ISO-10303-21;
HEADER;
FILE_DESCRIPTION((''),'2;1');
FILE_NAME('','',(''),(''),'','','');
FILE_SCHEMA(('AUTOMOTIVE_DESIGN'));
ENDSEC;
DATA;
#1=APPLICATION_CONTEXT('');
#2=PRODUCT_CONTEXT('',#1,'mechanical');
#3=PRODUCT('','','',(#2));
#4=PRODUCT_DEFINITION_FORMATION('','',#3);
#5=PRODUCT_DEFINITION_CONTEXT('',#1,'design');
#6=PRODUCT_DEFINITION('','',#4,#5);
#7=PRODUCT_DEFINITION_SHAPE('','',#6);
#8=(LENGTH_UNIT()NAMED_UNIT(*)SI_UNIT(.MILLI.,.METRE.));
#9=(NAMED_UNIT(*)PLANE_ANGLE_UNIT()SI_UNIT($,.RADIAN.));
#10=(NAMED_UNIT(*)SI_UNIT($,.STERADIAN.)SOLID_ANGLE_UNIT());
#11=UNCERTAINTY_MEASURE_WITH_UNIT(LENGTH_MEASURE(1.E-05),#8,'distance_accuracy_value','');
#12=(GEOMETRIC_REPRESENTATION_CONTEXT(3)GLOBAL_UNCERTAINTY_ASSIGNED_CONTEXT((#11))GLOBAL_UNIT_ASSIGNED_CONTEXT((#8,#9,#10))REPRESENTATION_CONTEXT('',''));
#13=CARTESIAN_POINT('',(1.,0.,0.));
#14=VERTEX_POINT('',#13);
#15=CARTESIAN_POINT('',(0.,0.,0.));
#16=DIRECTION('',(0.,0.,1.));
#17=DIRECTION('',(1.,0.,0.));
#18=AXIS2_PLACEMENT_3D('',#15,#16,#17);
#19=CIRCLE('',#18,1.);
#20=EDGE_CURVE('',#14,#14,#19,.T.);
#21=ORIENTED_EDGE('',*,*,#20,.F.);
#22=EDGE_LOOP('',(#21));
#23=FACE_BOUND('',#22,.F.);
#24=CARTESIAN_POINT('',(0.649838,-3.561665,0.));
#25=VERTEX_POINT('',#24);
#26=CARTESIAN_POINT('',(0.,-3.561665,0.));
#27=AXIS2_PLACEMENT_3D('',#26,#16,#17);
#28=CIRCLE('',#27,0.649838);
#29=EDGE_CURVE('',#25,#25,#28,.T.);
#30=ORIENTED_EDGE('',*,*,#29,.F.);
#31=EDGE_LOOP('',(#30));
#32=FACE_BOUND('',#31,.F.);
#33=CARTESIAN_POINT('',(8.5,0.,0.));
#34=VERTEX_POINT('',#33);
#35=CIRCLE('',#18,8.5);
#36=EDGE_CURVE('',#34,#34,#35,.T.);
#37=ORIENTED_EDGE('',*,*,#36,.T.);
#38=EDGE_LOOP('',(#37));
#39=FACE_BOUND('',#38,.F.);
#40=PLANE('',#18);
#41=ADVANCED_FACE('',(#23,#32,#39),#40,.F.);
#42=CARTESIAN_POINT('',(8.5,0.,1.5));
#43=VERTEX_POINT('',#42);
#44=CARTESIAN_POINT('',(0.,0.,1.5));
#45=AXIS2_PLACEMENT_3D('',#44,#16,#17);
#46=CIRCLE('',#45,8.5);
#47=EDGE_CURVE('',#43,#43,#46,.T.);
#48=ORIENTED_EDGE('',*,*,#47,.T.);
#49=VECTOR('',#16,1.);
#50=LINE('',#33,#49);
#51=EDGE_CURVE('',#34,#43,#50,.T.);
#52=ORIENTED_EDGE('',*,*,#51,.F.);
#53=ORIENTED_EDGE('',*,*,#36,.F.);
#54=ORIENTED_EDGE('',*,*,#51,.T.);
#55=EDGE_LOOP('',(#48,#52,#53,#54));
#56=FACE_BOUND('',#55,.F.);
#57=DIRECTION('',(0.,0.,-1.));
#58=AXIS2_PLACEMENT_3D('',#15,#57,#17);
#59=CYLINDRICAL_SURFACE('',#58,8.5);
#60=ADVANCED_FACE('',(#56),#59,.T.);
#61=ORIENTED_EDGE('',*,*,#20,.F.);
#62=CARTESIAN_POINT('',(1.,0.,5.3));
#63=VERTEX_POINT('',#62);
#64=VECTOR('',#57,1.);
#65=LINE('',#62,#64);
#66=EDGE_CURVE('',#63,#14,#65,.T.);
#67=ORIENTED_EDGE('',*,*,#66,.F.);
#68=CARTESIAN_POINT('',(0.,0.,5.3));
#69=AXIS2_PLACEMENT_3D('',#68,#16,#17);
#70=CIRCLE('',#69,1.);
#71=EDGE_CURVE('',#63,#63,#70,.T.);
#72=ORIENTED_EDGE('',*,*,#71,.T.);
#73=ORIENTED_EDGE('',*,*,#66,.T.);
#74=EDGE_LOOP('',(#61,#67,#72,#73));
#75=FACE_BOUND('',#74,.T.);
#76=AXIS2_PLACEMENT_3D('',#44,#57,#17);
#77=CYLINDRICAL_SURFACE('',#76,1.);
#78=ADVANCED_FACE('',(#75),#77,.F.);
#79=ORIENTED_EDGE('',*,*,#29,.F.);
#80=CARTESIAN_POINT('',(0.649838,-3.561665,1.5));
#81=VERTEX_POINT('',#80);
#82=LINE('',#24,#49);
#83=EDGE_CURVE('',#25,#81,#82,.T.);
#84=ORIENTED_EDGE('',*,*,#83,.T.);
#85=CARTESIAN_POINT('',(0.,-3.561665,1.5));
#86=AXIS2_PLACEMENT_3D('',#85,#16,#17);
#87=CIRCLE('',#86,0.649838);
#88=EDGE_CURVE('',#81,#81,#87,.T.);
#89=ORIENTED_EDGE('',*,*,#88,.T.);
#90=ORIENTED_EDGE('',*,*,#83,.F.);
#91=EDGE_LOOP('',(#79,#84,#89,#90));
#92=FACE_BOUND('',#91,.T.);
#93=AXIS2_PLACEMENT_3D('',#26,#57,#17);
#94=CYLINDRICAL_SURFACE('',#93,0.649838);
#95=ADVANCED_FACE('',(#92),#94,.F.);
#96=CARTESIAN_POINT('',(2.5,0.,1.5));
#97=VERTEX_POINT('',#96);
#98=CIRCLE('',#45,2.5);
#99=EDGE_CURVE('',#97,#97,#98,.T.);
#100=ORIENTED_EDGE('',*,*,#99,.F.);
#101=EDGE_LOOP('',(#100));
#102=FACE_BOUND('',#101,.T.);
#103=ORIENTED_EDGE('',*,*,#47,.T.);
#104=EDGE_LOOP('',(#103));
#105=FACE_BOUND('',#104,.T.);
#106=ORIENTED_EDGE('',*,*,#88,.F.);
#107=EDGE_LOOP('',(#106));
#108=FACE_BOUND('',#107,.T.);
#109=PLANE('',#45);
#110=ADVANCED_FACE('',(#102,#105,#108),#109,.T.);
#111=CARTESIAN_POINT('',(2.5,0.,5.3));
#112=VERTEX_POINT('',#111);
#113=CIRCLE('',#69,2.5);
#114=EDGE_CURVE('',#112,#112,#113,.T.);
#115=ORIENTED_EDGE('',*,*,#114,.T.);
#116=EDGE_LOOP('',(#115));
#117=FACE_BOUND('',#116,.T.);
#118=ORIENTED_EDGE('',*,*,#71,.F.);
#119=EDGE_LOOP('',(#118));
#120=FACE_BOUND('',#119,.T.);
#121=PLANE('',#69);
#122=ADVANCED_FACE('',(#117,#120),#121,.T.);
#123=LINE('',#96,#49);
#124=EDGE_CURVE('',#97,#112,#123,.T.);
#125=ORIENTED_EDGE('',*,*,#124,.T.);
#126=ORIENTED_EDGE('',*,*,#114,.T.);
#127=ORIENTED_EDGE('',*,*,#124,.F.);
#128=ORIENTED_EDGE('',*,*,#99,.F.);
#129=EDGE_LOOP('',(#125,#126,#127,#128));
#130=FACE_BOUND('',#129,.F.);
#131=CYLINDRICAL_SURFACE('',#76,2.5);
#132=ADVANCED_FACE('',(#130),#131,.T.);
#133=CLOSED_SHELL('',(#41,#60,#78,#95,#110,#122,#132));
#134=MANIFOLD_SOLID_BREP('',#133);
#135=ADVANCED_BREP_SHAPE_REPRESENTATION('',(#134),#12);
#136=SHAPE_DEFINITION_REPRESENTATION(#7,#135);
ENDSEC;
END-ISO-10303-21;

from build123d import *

# Parameters (mm, degrees)
F0_R     = 8.5
F0_R_2   = 1
F1_DEPTH = 1.5
F2_R     = 2.5
F2_R_2   = 1
F3_DEPTH = 3.8
F4_R     = 0.6498381819
F5_DEPTH = 1.5


# Not quite as in the source:
# - a feature names something its author has since deleted; it is built from what else it names


with BuildPart() as f1:
    # F0 (on Top) → F1 (new body)
    with BuildSketch(Plane.XY):
        Circle(F0_R)
        Circle(F0_R_2, mode=Mode.SUBTRACT)
    extrude(amount=F1_DEPTH)

    # F2 (on face) → F3 (join)
    with BuildSketch(Plane.XY.offset(1.5)):
        Circle(F2_R)
        Circle(F2_R_2, mode=Mode.SUBTRACT)
    extrude(amount=F3_DEPTH)

    # F4 (on Top) → F5 (cut, through all)
    with BuildSketch(Plane.XY):
        with Locations((0, -3.5616646055)):
            Circle(F4_R)
    extrude(amount=F5_DEPTH, mode=Mode.SUBTRACT)


solid = f1.part
